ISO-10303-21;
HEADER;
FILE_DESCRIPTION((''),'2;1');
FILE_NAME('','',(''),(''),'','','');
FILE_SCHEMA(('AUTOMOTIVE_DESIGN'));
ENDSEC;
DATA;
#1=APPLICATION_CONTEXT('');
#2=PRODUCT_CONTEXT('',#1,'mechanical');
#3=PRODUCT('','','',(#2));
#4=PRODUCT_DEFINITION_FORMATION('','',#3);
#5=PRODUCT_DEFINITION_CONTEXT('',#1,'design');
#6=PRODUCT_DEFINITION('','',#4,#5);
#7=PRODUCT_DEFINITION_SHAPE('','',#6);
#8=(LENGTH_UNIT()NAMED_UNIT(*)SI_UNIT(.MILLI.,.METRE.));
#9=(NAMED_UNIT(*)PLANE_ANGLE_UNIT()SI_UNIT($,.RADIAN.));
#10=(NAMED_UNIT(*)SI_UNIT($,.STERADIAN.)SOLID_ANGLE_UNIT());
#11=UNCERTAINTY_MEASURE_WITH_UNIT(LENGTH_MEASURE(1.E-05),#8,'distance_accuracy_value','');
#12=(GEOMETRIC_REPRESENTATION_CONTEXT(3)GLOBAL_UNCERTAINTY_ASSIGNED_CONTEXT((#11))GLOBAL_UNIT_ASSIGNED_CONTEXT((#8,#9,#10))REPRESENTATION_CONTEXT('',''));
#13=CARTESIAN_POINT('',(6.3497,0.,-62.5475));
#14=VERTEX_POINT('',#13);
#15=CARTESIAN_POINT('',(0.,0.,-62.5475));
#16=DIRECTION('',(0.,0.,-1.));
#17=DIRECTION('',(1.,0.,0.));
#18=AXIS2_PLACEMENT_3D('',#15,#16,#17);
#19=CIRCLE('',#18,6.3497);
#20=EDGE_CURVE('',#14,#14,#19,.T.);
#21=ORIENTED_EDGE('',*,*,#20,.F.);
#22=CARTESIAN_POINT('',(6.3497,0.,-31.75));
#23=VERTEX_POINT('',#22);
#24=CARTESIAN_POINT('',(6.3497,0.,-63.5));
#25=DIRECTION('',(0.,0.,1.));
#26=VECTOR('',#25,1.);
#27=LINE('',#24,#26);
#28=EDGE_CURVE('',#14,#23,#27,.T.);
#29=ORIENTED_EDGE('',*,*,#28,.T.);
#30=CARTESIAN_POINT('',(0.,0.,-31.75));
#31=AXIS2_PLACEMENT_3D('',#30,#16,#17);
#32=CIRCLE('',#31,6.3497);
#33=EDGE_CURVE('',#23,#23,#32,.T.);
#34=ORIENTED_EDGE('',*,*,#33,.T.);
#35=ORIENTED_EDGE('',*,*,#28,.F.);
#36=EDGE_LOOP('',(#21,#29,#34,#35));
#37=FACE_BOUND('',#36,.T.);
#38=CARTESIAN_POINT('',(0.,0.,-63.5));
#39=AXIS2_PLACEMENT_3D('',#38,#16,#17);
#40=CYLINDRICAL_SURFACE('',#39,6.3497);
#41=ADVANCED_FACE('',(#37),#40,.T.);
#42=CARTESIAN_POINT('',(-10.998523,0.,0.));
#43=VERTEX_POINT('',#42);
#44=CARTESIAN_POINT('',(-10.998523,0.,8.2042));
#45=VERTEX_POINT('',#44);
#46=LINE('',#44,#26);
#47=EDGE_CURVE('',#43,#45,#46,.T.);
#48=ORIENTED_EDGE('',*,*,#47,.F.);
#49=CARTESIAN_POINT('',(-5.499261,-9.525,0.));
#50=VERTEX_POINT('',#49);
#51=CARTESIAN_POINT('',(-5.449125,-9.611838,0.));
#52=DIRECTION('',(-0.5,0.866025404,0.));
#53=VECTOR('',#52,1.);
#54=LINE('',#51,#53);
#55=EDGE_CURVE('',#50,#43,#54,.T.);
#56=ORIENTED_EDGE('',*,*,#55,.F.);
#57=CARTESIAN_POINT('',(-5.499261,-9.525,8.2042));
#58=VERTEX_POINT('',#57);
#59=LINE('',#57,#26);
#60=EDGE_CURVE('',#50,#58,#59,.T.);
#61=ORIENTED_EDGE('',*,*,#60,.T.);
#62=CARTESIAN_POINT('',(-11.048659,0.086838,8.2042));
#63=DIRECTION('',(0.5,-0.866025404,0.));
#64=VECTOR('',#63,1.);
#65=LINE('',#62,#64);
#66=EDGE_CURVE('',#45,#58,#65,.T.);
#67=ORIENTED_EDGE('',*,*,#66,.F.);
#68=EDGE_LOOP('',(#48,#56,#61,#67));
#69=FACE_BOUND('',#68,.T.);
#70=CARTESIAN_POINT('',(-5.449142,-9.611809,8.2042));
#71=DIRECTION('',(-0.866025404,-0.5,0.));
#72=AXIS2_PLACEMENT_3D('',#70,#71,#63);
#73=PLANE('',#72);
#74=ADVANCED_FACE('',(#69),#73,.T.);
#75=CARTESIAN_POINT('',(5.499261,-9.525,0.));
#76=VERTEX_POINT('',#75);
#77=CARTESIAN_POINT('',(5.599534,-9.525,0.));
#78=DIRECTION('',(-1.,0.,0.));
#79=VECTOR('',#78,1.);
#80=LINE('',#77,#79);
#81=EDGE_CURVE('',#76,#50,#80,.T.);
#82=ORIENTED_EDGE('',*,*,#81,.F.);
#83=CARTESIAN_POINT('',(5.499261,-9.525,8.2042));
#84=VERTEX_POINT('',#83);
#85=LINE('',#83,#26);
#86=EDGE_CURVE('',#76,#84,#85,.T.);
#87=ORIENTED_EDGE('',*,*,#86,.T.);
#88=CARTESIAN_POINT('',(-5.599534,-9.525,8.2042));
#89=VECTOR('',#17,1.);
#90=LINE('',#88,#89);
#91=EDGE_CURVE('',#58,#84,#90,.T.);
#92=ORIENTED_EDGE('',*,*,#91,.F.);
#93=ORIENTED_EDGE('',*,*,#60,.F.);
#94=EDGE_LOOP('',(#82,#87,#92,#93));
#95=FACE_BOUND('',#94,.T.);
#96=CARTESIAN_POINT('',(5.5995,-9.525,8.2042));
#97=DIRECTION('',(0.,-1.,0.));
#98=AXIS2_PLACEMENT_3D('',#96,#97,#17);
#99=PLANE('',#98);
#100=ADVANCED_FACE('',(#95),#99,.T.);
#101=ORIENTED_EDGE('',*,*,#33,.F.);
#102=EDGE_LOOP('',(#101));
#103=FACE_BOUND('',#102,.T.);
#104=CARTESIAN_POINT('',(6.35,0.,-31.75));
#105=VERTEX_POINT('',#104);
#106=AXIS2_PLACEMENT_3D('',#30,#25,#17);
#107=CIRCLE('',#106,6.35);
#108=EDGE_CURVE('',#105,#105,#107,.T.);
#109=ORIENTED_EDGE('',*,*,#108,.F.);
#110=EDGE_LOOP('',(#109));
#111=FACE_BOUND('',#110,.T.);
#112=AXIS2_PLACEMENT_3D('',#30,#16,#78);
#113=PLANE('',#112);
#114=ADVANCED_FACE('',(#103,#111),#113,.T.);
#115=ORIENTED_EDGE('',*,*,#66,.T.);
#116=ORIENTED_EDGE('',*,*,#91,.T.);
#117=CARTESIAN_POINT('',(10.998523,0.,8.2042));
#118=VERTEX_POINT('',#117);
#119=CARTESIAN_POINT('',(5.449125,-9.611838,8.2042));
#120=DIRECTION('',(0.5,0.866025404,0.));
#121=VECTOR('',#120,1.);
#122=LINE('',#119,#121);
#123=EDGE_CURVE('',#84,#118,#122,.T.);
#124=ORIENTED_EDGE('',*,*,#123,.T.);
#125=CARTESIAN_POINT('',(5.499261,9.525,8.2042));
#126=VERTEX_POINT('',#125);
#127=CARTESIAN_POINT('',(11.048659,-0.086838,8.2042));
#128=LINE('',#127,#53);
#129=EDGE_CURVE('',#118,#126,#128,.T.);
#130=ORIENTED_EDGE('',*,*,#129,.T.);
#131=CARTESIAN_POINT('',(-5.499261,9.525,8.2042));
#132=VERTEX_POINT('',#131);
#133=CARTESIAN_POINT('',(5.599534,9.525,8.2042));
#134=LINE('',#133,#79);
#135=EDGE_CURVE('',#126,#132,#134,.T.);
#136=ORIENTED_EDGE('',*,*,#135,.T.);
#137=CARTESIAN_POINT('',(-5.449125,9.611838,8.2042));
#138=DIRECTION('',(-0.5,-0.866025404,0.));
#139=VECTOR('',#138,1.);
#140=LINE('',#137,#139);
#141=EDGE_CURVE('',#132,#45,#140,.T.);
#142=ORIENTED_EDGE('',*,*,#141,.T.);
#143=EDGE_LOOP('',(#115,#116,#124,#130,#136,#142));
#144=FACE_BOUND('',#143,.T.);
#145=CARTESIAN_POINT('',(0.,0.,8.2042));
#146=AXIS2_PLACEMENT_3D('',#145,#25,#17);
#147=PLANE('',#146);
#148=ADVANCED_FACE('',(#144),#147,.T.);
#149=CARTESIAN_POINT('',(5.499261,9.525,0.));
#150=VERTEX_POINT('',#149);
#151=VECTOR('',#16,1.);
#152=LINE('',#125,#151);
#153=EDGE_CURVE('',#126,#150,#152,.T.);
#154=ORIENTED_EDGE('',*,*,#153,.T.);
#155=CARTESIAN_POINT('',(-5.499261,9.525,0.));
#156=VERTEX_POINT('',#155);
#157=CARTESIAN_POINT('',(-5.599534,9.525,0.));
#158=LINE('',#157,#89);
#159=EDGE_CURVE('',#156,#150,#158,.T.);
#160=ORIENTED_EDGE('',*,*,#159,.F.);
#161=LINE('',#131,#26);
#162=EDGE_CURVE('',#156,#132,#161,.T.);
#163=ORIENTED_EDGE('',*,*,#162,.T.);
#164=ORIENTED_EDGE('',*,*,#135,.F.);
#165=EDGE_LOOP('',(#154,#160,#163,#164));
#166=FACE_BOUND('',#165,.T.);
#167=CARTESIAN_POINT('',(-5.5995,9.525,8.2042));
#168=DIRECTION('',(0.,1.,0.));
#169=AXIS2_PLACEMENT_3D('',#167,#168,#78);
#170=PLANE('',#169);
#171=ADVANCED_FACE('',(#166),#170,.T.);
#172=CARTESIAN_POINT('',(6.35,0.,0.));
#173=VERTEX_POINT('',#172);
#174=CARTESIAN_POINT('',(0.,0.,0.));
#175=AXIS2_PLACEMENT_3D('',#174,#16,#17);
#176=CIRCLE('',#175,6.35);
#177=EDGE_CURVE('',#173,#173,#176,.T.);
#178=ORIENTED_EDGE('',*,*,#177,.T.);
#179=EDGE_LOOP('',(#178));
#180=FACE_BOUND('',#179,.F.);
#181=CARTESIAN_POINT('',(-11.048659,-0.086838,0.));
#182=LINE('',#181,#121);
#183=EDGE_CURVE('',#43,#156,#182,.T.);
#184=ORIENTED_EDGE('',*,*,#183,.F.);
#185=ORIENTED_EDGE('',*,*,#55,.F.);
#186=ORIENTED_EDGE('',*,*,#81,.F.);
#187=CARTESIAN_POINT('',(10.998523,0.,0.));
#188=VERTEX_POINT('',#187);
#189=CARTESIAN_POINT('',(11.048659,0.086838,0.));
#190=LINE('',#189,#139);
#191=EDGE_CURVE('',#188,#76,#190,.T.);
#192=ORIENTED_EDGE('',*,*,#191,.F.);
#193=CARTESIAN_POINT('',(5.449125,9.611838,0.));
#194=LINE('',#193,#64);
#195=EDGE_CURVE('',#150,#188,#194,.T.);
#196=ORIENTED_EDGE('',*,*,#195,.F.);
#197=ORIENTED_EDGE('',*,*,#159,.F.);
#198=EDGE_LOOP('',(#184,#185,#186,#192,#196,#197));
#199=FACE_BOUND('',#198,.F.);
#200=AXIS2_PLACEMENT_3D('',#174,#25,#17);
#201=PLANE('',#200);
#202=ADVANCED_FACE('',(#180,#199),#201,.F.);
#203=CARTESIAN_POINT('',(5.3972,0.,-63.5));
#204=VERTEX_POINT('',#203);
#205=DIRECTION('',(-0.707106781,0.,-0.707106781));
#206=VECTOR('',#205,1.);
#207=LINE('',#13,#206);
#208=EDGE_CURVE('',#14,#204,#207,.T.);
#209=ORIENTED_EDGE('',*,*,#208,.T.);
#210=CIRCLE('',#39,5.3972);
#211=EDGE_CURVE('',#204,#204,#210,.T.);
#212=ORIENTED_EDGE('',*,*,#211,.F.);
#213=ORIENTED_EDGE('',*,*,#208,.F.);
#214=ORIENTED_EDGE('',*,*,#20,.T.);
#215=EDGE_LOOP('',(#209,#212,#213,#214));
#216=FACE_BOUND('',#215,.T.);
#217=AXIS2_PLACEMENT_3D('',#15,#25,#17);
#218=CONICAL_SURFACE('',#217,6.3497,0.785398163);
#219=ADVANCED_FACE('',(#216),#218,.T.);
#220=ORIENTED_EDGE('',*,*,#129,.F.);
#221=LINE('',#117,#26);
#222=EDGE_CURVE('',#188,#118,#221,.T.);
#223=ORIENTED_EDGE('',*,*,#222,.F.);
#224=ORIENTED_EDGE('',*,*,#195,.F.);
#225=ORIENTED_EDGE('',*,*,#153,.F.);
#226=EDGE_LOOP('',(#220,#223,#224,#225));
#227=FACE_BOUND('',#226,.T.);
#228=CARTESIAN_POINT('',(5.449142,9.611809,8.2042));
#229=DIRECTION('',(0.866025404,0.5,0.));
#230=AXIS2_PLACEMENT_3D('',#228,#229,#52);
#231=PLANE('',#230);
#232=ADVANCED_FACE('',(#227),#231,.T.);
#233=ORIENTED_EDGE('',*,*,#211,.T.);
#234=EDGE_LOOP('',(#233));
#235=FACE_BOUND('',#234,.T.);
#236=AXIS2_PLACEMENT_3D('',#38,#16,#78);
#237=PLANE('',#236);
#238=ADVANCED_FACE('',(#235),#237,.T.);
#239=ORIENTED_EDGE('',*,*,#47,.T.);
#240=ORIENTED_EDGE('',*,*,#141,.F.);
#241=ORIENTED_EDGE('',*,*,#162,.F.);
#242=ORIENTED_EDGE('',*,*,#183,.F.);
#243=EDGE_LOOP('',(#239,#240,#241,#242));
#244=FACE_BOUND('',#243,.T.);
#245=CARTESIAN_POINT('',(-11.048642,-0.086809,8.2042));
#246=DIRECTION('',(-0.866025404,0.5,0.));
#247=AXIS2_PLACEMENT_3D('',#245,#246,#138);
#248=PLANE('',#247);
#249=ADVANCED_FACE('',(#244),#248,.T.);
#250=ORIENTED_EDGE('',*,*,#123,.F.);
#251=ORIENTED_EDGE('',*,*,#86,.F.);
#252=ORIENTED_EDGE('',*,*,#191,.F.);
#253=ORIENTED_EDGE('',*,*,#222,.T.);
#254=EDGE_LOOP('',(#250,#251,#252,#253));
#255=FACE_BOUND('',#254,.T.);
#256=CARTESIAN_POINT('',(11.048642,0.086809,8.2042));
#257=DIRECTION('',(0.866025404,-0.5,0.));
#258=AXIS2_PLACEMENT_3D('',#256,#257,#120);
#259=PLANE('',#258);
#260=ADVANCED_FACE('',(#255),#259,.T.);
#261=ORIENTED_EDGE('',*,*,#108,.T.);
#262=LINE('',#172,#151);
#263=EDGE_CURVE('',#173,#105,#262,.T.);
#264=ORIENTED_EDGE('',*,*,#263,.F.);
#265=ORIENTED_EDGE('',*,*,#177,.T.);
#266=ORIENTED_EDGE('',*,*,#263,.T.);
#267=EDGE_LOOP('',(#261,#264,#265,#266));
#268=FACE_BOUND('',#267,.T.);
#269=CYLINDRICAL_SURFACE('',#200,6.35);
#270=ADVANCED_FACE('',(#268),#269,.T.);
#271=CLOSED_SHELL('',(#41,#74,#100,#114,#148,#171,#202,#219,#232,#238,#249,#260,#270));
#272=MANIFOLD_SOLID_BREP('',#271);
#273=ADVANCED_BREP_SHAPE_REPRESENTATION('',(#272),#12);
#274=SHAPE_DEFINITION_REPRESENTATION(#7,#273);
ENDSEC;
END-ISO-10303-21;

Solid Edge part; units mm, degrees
sketch "Sketch1" plane through (0, 0, 0) normal (0, 0, 1) x (1, 0, 0)
  circle A0 centre (0, 0) radius 11.049
  dimension "D1" = 22.098
extrude "Protrusion1" add sketch "Sketch1" along normal blind 8.2042
sketch "Sketch2" plane through (0, 0, 0) normal (0, 0, -1) x (1, 0, 0)
  circle A0 centre (0, 0) radius 6.35
extrude "Protrusion2" add sketch "Sketch2" along normal blind 63.5
sketch "Sketch3" plane through (0, 0, -63.5) normal (0, 0, -1) x (1, 0, 0)
  circle A0 centre (0, 0) radius 6.3497
extrude "Cutout1" cut sketch "Sketch3" against normal blind 31.75 flip side to cut
chamfer "Chamfer_1" distance 0.9525 angle 45 1 edges at (-6.3497, 0, -63.5)
sketch "Sketch4" plane through (0, 0, 8.2042) normal (0, 0, 1) x (1, 0, 0)
  line L0 (-5.5995, 9.525) -> (5.5995, 9.525)
  dimension "D1" = 19.05
extrude "Cutout2" cut sketch "Sketch4" against normal up to next material side at (0, 9.575, 8.2042)
pattern_circular "Pattern1" count 6 over 360 about axis through (0, 0, 8.2042) along (0, 0, 1) of "Cutout2"
properties part number "24106434"
